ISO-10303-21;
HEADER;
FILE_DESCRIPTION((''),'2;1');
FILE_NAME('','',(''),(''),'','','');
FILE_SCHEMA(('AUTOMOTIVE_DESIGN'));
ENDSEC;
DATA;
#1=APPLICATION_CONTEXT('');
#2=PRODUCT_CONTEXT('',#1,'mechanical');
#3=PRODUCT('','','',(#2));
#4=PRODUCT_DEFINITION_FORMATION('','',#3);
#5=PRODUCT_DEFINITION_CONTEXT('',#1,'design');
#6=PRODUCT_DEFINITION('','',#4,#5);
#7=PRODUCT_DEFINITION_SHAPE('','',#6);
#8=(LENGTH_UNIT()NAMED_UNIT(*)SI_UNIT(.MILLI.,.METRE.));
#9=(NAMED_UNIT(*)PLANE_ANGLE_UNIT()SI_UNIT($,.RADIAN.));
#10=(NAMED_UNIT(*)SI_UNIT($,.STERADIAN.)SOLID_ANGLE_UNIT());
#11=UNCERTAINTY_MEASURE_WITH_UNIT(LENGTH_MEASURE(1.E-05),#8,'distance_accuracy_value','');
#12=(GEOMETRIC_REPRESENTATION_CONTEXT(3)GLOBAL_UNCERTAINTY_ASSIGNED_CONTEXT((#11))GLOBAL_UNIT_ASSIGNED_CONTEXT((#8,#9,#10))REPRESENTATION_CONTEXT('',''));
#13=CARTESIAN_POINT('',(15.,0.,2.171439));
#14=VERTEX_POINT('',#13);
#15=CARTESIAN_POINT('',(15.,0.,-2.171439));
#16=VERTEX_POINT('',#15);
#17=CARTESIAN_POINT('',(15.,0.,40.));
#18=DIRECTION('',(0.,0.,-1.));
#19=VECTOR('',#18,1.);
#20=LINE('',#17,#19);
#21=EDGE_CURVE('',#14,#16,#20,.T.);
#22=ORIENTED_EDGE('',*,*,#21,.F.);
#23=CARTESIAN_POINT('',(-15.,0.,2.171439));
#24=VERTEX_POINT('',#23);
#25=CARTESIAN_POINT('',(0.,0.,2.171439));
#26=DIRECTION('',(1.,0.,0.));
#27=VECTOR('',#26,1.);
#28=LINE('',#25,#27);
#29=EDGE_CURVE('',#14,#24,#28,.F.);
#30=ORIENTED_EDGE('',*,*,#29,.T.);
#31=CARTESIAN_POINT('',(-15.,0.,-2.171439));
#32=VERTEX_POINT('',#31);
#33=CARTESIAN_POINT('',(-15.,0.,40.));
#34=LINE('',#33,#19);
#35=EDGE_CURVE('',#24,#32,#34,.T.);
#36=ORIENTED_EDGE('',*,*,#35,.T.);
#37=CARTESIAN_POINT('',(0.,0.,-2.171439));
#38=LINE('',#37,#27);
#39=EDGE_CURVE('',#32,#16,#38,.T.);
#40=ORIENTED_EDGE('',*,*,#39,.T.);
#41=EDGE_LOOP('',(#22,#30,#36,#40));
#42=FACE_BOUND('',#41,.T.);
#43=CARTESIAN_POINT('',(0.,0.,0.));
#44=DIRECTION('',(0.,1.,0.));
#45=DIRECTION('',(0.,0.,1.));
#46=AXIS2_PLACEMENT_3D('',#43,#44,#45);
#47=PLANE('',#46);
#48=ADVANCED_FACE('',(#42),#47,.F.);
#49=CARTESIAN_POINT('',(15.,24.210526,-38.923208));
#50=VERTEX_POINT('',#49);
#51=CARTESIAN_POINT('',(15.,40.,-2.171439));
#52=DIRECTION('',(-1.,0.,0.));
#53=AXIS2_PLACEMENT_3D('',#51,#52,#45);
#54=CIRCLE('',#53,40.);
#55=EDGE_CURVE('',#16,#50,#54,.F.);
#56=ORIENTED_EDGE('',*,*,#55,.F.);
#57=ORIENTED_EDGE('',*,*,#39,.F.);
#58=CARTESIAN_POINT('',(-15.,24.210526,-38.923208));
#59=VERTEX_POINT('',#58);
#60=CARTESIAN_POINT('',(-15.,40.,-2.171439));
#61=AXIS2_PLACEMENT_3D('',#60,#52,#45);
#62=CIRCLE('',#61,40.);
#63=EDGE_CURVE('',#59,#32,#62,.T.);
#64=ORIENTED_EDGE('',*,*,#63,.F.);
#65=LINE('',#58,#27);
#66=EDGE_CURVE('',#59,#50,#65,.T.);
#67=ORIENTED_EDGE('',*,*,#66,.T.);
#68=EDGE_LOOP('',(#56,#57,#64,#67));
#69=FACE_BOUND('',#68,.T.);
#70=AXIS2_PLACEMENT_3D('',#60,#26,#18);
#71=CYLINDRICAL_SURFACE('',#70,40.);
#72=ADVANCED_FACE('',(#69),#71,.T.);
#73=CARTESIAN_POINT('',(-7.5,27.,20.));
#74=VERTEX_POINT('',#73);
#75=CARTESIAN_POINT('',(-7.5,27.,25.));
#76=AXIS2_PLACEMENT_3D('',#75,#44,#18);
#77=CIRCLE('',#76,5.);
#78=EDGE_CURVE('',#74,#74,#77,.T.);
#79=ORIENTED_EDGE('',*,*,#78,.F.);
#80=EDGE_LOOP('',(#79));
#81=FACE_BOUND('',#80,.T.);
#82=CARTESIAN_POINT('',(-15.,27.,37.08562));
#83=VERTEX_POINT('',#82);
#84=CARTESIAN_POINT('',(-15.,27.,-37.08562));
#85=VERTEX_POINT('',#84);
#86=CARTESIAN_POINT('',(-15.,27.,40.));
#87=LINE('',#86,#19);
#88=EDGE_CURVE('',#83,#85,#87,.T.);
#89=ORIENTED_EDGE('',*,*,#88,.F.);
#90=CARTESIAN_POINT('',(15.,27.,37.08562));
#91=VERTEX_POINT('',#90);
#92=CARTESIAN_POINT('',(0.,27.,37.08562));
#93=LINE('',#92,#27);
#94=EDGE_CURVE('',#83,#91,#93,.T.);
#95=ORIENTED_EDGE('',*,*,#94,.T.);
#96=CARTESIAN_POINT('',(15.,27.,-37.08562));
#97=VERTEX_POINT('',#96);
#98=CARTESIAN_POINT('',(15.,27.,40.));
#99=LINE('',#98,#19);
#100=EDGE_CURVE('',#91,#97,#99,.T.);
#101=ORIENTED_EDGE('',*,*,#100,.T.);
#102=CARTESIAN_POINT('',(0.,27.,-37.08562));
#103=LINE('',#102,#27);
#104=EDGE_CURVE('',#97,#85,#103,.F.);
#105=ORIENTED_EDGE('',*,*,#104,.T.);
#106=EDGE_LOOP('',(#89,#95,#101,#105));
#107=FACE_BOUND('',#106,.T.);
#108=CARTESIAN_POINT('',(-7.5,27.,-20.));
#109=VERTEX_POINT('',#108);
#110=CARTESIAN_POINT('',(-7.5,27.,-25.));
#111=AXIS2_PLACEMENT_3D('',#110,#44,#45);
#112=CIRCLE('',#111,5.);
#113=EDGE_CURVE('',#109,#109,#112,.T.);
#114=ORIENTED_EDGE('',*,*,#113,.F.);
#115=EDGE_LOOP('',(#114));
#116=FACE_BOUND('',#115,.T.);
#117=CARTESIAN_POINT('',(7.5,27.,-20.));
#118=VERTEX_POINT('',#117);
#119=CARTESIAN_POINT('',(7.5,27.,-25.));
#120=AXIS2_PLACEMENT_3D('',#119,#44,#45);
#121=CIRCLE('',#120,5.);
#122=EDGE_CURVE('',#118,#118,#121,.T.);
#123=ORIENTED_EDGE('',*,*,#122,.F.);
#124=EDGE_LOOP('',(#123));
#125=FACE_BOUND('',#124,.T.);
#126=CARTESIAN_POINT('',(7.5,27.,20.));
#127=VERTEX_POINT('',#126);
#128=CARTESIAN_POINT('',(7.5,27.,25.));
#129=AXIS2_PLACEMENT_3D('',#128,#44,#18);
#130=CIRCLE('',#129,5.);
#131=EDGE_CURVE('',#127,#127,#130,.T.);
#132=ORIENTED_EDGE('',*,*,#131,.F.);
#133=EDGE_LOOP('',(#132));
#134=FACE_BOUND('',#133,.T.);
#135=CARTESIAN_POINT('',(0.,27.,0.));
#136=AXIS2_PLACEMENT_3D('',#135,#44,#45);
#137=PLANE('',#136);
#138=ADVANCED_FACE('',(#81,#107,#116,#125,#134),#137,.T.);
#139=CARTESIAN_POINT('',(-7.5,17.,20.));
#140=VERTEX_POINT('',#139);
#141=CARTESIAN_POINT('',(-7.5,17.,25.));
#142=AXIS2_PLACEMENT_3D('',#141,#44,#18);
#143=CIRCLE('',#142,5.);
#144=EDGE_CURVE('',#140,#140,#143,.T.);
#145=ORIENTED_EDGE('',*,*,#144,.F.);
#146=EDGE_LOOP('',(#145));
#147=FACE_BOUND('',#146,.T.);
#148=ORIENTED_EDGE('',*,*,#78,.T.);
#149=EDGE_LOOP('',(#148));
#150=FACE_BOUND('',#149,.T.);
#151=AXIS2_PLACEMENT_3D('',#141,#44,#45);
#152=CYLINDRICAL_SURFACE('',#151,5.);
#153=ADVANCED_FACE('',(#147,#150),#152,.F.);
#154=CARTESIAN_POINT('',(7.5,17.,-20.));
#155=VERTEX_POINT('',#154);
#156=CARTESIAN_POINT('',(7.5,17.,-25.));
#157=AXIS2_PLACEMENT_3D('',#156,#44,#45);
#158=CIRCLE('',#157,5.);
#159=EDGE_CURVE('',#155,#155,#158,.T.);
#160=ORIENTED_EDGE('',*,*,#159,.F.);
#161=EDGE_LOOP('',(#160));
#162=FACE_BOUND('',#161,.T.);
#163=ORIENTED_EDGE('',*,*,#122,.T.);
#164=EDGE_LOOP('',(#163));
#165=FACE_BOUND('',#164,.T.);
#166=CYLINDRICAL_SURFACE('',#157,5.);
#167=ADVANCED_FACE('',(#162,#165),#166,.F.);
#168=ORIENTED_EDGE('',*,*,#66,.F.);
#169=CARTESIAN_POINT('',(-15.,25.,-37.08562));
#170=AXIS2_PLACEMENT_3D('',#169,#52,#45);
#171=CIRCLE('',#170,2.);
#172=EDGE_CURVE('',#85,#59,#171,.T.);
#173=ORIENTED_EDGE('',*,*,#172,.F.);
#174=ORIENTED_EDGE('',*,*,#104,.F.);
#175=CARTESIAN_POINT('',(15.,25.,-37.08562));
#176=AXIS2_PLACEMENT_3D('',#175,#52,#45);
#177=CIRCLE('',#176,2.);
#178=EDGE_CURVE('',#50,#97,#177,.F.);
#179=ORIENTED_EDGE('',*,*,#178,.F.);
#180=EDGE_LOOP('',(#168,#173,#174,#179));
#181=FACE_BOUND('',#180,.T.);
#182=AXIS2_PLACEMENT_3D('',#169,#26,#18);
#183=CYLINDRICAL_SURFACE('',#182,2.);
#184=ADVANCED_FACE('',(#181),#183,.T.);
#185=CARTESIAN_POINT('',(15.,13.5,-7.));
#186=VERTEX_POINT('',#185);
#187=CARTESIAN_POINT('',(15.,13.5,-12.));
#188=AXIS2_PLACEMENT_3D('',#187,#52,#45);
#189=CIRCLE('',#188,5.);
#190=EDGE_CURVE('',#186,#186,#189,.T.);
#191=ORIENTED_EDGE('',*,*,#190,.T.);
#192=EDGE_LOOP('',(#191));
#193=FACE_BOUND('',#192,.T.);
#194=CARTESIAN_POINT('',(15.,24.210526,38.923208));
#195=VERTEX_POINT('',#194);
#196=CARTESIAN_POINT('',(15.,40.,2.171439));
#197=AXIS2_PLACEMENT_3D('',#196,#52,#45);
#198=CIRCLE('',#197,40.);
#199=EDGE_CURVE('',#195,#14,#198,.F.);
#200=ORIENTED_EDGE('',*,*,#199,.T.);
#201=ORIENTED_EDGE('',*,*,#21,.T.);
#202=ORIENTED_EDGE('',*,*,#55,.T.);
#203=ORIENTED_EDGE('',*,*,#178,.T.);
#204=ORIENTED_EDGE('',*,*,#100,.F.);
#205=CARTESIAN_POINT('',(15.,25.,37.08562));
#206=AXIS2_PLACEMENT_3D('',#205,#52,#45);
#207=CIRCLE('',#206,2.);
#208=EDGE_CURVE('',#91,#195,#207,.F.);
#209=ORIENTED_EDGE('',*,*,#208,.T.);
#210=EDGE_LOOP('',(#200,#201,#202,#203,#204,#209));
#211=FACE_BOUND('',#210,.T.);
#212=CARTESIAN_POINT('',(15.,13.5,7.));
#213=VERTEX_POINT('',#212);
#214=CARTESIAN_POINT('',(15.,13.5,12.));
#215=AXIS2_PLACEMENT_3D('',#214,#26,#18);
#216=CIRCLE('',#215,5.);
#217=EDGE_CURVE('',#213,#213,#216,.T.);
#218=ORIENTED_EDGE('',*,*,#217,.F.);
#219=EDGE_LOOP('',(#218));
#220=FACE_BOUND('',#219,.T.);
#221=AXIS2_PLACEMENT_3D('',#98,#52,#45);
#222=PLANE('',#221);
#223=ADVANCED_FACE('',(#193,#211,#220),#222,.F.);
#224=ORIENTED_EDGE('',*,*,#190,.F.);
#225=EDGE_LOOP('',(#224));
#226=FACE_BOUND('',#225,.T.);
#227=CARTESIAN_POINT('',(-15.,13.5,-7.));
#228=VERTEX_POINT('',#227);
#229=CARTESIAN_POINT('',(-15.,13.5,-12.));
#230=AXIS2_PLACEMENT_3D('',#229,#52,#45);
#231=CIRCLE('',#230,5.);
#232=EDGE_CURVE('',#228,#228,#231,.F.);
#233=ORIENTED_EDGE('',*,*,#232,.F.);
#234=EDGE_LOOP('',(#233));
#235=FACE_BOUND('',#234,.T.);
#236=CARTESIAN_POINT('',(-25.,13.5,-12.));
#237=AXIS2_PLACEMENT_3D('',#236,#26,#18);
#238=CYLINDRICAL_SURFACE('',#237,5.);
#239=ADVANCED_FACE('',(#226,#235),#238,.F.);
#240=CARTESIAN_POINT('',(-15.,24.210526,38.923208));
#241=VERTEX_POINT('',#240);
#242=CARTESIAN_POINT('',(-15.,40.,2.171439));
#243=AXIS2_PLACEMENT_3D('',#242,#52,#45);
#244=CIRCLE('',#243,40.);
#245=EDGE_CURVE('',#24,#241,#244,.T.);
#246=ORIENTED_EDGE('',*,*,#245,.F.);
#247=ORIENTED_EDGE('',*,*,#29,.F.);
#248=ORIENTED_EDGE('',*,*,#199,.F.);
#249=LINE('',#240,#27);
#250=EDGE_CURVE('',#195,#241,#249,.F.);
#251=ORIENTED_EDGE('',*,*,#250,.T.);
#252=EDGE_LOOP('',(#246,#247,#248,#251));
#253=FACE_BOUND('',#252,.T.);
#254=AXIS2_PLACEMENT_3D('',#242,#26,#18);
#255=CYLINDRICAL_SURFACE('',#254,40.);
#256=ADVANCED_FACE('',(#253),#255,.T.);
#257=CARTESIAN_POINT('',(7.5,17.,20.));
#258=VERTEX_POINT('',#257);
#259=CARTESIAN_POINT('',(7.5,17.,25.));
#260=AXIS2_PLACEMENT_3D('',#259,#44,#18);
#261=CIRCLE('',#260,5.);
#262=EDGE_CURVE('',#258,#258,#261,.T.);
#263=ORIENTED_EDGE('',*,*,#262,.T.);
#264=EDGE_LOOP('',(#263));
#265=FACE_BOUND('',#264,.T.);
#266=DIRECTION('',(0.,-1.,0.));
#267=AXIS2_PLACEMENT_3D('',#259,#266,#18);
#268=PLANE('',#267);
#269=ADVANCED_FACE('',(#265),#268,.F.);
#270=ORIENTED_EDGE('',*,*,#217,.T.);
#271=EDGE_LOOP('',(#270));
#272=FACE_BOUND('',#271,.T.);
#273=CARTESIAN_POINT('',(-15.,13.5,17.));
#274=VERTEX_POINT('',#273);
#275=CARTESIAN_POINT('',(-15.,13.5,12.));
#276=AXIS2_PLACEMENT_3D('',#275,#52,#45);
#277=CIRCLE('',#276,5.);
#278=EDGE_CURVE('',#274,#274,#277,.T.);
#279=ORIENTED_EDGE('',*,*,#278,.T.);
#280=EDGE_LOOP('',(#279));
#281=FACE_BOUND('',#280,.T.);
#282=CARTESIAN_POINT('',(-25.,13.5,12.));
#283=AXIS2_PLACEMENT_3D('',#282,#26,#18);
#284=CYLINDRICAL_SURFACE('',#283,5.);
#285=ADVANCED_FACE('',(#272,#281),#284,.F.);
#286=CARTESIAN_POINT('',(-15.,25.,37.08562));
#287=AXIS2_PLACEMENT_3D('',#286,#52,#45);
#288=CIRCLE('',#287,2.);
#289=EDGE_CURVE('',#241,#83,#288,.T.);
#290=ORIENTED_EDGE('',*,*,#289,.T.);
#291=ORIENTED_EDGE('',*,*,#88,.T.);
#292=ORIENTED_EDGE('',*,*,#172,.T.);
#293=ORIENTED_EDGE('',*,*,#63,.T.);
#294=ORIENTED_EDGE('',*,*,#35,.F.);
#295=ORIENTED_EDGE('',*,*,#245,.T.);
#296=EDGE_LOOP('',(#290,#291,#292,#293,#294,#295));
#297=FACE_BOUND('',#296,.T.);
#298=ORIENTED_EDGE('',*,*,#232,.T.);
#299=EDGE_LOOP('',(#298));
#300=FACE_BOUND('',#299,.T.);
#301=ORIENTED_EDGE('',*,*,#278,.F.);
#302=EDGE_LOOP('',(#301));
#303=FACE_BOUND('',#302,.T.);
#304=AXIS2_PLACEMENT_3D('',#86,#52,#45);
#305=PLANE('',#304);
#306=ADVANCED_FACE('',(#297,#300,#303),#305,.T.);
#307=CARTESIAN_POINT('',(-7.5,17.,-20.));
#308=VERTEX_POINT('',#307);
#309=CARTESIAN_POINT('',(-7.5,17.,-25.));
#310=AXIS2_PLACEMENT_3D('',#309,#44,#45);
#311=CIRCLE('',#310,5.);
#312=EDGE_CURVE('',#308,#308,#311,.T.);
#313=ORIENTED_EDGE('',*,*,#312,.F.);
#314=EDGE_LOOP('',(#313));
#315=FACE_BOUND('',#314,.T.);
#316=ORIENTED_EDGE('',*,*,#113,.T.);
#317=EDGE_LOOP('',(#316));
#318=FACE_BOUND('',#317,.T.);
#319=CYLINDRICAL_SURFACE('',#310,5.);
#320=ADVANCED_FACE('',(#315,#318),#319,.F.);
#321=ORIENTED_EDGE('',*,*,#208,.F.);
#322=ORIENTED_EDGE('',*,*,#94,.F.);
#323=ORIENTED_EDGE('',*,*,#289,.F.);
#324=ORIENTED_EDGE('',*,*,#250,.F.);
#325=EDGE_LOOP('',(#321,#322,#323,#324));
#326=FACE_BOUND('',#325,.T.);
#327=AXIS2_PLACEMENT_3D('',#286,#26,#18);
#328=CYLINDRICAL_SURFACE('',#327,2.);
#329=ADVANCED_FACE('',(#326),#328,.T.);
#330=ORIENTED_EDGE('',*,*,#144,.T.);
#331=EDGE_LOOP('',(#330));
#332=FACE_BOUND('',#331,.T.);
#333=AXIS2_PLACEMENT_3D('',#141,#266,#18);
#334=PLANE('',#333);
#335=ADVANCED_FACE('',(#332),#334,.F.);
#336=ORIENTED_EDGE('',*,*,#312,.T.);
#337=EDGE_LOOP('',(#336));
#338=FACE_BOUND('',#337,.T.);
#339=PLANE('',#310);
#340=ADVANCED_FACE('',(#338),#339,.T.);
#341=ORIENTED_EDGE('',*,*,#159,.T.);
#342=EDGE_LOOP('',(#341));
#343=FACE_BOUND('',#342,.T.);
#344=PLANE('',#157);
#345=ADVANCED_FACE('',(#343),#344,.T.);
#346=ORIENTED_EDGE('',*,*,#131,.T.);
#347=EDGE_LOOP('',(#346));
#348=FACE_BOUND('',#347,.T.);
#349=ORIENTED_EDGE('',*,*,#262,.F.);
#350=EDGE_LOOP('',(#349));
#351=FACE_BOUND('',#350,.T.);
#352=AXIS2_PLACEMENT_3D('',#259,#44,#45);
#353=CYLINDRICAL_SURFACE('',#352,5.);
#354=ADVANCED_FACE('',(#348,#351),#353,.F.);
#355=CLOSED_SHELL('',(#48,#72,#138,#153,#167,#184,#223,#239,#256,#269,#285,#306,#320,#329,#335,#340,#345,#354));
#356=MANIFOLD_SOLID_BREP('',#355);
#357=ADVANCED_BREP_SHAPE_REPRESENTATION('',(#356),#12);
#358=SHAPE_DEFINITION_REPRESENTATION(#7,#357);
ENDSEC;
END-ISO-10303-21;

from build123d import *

# Parameters (mm, degrees)
SKETCH1_W           = 30
SKETCH1_H           = 80
BOSS_EXTRUDE1_DEPTH = 27
SKETCH2_R           = 5
CUT_EXTRUDE1_DEPTH  = 40
FILLET5_R           = 40
FILLET6_R           = 40
FILLET7_R           = 2
FILLET8_R           = 2
SKETCH6_R           = 5
CUT_EXTRUDE3_DEPTH  = 10


with BuildPart() as part:
    # Sketch1 → Boss-Extrude1 (new body)
    with BuildSketch(Plane(origin=(0, 0, 0), x_dir=(1, 0, 0), z_dir=(0, 1, 0))):
        Rectangle(SKETCH1_W, SKETCH1_H)
    extrude(amount=BOSS_EXTRUDE1_DEPTH)

    # Sketch2 → Cut-Extrude1 (cut)
    with BuildSketch(Plane(origin=(15, 0, 0), x_dir=(0, 0, -1), z_dir=(1, 0, 0))):
        with Locations((-12, 13.5)):
            Circle(SKETCH2_R)
        with Locations(Location((12, 13.5, 0), (0, 0, 180))):
            Circle(SKETCH2_R)
    extrude(amount=-CUT_EXTRUDE1_DEPTH, mode=Mode.SUBTRACT)

    # Fillet5
    # the kernel refuses this fillet: 40 mm, written as the material it takes off along each edge
    with BuildSketch(Plane(origin=(109.571401597, 0, -40), x_dir=(0, 0, 1), z_dir=(-1, 0, 0))) as fillet5_piece_1:
        with BuildLine():
            CenterArc((37.828560639, 40), FILLET5_R, 198.965574989, 71.034425011)
            Line((0, 27), (-0.756571213, 26.74))
            ThreePointArc((-0.756571213, 26.74), (-0.8, 13.5), (-0.8, 0))
            Line((-0.8, 0), (0, -0.8))
            Line((0, -0.8), (37.828560639, -0.8))
            Line((37.828560639, -0.8), (37.828560639, 0))
        make_face()
    extrude(amount=219.142803194, mode=Mode.SUBTRACT)

    # Fillet6
    # the kernel refuses this fillet: 40 mm, written as the material it takes off along each edge
    with BuildSketch(Plane(origin=(-109.571401597, 0, 40), x_dir=(0, 1, 0), z_dir=(1, 0, 0))) as fillet6_piece_1:
        with BuildLine():
            CenterArc((40, -37.828560639), FILLET6_R, 108.965574989, 71.034425011)
            Line((0, -37.828560639), (-0.8, -37.828560639))
            Line((-0.8, -37.828560639), (-0.8, 0))
            Line((-0.8, 0), (0, 0.8))
            ThreePointArc((0, 0.8), (13.5, 0.8), (26.74, 0.756571213))
            Line((26.74, 0.756571213), (27, 0))
        make_face()
    extrude(amount=219.142803194, mode=Mode.SUBTRACT)

    # Fillet7
    fillet7_edges = [part.edges().sort_by_distance(p)[0] for p in [
        (0, 27, -40),
    ]]
    fillet(fillet7_edges, radius=FILLET7_R)

    # Fillet8
    fillet8_edges = [part.edges().sort_by_distance(p)[0] for p in [
        (0, 27, 40),
    ]]
    fillet(fillet8_edges, radius=FILLET8_R)

    # Sketch6 → Cut-Extrude3 (cut)
    with BuildSketch(Plane(origin=(0, 27, 0), x_dir=(1, 0, 0), z_dir=(0, 1, 0))):
        with Locations(Location((-7.5, 25, 0), (0, 0, 270))):
            Circle(SKETCH6_R)
        with Locations(Location((7.5, 25, 0), (0, 0, 270))):
            Circle(SKETCH6_R)
        with Locations(Location((7.5, -25, 0), (0, 0, 90))):
            Circle(SKETCH6_R)
        with Locations(Location((-7.5, -25, 0), (0, 0, 90))):
            Circle(SKETCH6_R)
    extrude(amount=-CUT_EXTRUDE3_DEPTH, mode=Mode.SUBTRACT)


solid = part.part
